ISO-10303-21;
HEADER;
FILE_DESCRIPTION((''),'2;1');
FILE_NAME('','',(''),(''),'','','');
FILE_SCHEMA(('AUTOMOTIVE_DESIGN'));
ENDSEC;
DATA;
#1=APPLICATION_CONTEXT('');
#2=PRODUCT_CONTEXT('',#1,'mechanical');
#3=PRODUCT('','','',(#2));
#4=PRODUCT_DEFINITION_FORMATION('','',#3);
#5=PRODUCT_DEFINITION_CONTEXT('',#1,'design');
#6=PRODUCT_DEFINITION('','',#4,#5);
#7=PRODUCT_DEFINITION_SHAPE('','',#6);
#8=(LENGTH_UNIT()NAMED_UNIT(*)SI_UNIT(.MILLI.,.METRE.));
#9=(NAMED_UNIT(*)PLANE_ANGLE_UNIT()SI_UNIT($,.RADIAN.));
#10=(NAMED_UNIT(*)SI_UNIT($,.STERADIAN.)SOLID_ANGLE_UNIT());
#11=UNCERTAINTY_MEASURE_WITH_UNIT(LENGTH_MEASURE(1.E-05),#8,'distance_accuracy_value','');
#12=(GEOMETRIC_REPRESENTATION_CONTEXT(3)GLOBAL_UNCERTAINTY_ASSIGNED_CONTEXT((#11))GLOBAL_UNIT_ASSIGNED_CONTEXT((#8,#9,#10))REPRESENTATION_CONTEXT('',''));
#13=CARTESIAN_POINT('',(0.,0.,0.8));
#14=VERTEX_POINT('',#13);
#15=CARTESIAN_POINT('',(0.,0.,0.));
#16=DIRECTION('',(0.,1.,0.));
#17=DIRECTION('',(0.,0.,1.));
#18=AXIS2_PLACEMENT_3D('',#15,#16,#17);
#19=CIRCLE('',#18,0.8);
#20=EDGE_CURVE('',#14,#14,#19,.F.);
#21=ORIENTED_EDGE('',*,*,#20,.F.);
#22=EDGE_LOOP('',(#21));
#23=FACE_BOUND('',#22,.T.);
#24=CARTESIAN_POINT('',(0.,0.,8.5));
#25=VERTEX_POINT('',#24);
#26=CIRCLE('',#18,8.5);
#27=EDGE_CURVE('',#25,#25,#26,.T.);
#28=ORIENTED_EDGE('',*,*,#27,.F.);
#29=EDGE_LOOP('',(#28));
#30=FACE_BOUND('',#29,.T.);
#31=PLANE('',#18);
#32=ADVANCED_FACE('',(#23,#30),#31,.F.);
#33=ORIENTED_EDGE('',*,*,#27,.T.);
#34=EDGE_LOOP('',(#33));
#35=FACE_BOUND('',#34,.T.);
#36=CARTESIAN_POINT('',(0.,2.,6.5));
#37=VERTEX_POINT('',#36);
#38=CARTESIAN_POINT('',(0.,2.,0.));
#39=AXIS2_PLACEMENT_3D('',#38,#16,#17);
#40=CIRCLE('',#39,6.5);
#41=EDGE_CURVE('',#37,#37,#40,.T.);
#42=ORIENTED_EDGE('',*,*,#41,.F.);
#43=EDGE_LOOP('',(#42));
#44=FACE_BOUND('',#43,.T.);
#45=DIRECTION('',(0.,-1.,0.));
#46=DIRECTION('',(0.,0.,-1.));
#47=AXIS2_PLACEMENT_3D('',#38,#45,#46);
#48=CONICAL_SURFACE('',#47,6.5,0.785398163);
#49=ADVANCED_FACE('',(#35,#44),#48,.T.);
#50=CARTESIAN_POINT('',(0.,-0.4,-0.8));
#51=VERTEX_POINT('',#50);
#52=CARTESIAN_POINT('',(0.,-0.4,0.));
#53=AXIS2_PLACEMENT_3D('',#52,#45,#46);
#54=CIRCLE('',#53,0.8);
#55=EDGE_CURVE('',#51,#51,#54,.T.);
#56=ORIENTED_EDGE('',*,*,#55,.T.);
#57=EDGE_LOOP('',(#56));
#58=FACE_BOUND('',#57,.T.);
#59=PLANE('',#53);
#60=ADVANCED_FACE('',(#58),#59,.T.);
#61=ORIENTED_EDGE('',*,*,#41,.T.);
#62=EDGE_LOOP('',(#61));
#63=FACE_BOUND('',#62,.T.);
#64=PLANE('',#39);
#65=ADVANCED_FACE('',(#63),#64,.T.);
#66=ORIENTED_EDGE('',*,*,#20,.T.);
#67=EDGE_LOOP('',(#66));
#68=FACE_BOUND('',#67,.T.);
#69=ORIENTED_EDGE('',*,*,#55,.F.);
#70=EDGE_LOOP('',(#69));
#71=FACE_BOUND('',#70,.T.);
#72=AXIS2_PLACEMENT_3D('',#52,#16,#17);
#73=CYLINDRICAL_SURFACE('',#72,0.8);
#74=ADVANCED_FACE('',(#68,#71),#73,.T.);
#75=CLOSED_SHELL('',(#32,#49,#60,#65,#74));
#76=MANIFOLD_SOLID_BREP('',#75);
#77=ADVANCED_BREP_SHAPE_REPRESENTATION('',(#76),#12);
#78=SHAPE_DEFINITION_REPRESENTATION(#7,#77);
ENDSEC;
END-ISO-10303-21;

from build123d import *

# Parameters (mm, degrees)
SKETCH1_R           = 8.5
BOSS_EXTRUDE1_DEPTH = 2
CHAMFER1_SIZE       = 2
SKETCH2_R           = 0.8
BOSS_EXTRUDE2_DEPTH = 0.4


with BuildPart() as part:
    # Sketch1 → Boss-Extrude1 (new body)
    with BuildSketch(Plane(origin=(0, 0, 0), x_dir=(1, 0, 0), z_dir=(0, 1, 0))):
        with Locations(Location((0, 0, 0), (0, 0, 270))):
            Circle(SKETCH1_R)
    extrude(amount=BOSS_EXTRUDE1_DEPTH)

    # Chamfer1
    chamfer1_edges = [part.edges().sort_by_distance(p)[0] for p in [
        (0, 2, -8.5),
    ]]
    chamfer(chamfer1_edges, length=CHAMFER1_SIZE - 0.0001)  # a hair under: the kernel refuses the full size

    # Sketch2 → Boss-Extrude2 (add)
    with BuildSketch(Plane(origin=(0, 0, 0), x_dir=(-1, 0, 0), z_dir=(0, -1, 0))):
        with Locations(Location((0, 0, 0), (0, 0, 270))):
            Circle(SKETCH2_R)
    extrude(amount=BOSS_EXTRUDE2_DEPTH)


solid = part.part
